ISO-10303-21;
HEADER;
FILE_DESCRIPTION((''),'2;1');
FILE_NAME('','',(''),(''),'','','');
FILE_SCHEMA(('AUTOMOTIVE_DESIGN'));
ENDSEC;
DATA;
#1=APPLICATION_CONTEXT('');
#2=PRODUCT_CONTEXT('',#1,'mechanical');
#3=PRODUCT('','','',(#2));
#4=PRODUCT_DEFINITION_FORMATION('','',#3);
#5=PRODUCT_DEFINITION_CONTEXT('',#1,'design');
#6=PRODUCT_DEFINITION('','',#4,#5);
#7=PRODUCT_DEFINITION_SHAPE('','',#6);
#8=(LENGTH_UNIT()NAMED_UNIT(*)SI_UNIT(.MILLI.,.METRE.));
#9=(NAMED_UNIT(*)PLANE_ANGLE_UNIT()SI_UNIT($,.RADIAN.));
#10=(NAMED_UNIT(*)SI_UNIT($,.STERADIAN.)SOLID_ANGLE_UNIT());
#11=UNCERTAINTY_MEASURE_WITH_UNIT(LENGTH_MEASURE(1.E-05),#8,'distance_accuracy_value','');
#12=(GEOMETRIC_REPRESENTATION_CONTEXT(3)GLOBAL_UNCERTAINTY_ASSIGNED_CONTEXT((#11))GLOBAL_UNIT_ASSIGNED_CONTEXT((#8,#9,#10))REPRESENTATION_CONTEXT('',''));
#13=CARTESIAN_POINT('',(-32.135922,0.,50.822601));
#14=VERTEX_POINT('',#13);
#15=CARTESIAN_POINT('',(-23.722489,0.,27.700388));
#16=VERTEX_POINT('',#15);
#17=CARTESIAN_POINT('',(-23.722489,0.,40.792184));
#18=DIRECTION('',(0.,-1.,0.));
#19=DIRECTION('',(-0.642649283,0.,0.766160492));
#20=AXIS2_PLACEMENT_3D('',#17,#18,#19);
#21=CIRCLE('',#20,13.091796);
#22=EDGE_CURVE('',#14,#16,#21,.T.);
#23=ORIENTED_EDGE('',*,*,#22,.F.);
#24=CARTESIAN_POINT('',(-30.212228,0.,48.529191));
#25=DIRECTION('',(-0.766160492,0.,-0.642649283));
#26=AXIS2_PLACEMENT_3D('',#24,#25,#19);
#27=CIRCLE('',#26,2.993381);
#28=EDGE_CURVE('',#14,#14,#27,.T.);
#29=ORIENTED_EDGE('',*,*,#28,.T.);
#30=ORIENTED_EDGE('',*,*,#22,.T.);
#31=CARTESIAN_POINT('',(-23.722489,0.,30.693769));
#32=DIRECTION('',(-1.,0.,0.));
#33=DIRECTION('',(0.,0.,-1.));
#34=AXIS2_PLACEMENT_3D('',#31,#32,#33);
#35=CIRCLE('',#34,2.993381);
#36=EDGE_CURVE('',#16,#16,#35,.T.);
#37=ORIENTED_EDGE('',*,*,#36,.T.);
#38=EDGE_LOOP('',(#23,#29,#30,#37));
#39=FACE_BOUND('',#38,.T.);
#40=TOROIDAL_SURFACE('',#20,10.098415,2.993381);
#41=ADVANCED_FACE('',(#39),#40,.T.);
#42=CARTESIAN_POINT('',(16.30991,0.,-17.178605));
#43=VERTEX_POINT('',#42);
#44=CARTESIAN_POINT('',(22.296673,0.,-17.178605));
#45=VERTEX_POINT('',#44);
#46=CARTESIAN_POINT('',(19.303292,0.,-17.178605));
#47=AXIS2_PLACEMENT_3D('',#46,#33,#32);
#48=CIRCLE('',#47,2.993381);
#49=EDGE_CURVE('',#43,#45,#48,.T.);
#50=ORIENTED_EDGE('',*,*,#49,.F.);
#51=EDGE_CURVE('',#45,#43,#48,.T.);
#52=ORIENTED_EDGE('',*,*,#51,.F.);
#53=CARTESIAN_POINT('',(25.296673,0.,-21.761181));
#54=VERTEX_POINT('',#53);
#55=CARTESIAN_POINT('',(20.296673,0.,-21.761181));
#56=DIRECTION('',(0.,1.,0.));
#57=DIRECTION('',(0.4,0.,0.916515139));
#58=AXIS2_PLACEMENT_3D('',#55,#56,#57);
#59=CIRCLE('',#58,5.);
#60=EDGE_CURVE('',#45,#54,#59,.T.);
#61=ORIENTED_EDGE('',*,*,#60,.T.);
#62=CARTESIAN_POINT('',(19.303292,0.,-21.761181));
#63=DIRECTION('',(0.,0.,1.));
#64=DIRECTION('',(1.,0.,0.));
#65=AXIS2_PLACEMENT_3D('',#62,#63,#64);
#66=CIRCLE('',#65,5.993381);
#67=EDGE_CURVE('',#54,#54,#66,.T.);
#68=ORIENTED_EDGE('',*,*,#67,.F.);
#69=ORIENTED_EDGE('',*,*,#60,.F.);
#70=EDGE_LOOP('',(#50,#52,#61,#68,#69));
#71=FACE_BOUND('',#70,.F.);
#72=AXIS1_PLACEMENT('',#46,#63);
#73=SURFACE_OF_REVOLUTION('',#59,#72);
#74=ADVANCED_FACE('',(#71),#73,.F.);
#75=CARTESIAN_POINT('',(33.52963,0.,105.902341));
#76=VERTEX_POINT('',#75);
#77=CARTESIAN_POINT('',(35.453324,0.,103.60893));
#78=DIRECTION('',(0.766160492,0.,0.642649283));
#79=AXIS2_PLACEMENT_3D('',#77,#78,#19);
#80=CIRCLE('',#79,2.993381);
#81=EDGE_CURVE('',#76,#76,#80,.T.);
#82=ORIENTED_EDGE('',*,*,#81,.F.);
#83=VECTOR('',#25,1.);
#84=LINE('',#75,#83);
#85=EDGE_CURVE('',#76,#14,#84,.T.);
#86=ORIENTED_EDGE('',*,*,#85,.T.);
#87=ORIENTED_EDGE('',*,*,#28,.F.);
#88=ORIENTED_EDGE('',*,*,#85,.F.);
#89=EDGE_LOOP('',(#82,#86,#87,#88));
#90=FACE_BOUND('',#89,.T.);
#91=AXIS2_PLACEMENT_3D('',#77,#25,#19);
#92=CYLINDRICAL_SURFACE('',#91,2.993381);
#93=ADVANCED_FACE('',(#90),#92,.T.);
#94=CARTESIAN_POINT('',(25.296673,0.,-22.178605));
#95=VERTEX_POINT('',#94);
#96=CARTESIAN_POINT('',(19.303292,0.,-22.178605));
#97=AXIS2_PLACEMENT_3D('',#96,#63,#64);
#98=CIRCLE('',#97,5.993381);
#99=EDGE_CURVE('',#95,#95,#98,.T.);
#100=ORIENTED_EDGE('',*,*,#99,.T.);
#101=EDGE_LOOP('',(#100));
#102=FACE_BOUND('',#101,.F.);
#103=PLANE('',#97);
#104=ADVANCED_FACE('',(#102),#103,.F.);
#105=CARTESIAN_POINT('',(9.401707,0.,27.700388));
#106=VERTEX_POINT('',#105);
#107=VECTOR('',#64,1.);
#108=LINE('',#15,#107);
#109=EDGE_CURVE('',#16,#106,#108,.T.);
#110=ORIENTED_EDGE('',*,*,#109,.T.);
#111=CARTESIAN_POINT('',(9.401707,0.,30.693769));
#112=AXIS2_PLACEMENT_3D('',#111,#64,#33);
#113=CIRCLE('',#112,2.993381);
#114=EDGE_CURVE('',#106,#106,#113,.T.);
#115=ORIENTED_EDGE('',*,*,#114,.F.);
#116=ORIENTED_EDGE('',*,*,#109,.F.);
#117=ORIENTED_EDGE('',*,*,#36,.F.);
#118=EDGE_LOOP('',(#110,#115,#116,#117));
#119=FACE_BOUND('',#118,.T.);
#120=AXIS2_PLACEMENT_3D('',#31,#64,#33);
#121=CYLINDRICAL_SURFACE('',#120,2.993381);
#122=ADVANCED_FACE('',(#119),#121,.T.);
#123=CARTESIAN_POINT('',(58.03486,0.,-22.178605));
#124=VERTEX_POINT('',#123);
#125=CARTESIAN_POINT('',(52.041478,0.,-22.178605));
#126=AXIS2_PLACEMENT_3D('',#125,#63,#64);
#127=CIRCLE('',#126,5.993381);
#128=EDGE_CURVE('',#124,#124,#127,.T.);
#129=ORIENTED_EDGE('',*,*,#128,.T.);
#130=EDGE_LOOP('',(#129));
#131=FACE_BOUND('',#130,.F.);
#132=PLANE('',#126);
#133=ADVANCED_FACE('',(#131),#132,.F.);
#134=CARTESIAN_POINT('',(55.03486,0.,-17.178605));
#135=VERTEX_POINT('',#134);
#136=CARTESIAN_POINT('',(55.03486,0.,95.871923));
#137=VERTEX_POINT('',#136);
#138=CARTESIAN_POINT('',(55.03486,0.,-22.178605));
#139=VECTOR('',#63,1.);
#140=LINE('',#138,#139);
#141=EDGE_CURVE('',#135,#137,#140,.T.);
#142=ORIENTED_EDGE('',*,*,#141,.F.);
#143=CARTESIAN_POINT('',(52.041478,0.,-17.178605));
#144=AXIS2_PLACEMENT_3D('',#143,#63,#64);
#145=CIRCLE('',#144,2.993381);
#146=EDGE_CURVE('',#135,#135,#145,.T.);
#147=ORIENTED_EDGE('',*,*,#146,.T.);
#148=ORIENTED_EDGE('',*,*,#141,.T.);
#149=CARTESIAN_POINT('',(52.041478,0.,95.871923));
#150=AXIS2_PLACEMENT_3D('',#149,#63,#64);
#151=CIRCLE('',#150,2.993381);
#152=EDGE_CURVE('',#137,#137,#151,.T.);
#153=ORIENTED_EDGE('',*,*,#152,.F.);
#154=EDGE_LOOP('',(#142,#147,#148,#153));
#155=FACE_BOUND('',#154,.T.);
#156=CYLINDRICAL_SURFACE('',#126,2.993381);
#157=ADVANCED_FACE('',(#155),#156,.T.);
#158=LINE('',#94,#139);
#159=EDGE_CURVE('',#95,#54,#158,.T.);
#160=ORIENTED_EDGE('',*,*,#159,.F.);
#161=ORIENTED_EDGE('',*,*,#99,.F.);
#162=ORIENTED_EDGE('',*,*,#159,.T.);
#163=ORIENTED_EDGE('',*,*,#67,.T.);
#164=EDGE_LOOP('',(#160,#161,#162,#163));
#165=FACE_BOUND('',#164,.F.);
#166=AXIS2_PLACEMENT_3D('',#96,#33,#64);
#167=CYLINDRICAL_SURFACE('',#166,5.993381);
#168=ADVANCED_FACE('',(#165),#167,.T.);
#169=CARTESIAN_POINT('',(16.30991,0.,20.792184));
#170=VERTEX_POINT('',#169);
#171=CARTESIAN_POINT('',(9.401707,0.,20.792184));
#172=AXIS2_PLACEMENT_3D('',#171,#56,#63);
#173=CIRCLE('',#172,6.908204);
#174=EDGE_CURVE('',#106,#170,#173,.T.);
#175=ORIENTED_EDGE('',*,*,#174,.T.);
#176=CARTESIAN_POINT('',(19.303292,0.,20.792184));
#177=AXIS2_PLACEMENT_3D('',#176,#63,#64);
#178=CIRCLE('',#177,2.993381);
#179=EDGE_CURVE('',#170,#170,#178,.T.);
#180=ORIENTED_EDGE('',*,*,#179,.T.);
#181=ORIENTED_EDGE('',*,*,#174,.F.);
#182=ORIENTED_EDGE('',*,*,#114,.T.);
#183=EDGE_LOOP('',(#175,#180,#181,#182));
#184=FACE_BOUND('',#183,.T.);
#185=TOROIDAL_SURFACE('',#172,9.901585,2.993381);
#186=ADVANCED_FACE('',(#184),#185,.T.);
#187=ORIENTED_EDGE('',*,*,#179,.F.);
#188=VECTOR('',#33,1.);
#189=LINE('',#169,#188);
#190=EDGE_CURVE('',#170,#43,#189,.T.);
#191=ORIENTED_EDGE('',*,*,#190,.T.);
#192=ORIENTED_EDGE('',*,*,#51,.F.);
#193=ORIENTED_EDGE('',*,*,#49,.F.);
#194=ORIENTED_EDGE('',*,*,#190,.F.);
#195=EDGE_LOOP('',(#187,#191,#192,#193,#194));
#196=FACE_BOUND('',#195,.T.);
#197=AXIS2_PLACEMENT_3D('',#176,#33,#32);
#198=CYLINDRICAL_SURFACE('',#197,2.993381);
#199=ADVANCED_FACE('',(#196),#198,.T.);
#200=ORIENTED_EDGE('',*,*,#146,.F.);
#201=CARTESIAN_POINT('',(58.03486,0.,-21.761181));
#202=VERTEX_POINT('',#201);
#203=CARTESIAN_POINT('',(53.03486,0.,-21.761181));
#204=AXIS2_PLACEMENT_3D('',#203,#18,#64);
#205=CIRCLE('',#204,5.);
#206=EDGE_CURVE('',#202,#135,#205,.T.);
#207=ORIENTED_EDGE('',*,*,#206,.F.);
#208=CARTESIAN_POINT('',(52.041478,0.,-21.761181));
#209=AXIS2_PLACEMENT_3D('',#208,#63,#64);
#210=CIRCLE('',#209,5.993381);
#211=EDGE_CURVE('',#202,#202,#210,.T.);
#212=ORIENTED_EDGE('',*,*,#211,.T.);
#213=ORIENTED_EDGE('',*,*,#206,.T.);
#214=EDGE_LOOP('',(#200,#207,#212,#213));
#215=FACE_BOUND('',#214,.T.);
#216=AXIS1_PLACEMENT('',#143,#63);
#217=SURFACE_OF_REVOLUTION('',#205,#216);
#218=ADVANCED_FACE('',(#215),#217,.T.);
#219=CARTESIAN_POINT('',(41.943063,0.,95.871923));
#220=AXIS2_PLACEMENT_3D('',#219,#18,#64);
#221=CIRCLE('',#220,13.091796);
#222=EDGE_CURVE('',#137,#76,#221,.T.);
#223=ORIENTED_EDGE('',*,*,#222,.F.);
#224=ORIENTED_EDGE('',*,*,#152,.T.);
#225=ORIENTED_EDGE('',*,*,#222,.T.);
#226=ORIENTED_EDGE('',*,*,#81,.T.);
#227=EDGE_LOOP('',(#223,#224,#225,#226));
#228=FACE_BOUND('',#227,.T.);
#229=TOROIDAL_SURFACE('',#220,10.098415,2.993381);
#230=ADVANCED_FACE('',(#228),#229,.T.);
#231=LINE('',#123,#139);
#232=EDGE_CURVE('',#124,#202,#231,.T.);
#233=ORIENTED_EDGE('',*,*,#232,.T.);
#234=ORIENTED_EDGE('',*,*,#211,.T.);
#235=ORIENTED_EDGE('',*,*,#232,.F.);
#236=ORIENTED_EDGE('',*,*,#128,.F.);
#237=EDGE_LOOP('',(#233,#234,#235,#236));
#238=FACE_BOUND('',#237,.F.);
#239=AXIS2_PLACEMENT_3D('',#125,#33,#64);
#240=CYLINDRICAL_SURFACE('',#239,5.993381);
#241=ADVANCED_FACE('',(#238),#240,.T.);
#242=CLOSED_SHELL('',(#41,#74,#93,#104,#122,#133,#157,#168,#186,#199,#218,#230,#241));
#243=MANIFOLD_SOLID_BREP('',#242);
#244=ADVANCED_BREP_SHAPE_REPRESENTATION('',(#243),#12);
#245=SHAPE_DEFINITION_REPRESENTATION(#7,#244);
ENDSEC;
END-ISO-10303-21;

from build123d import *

# Parameters (mm, degrees)
F2_R     = 2.9933814251
F4_R     = 5.9933814251
F5_DEPTH = 5


# Not quite as in the source:
# - a fillet or chamfer that OpenCascade refuses, or shapes differently, is made with other operations: its cross-section is extruded or revolved along the edge and cut away or added


with BuildPart() as f3:
    # F3: sweep along a path in F0
    with BuildLine(Plane.XZ) as f3_path:
        Line((51.9430634924, -22.1786051989), (51.9430634924, 95.8719234608))
        ThreePointArc((51.9430634924, 95.8719234608), (46.1700643013, 104.9346197572), (35.5165706601, 103.533528376))
        Line((35.5165706601, 103.533528376), (-30.1489816492, 48.4537890892))
        ThreePointArc((-30.1489816492, 48.4537890892), (-33.11972376, 37.3728311031), (-23.7224888169, 30.7921841741))
        Line((-23.7224888169, 30.7921841741), (9.4017067552, 30.7921841741))
        ThreePointArc((9.4017067552, 30.7921841741), (16.472774567, 27.8632519859), (19.4017067552, 20.7921841741))
        Line((19.4017067552, 20.7921841741), (19.4017067552, -22.1786051989))
    # F2 (on line) → F3 (sweep)
    with BuildSketch(Plane.XY.offset(-22.1786051989)):
        with Locations((52.0414784551, 0)):
            Circle(F2_R)
    sweep(path=f3_path.line)

    # F4 (on line) → F5 (join)
    with BuildSketch(Plane.XY.offset(-22.1786051989)):
        with Locations((52.0414784551, 0)):
            Circle(F4_R)
        with Locations((19.3032917925, 0)):
            Circle(F4_R)
    extrude(amount=F5_DEPTH)

    # F6: fillet of radius 5 on 2 edges, made by hand

    # F6_s1 → F6_t2 (revolve, cut)
    with BuildSketch(Plane.XZ):
        with BuildLine():
            ThreePointArc((58.0348598802, -21.7611808938), (57.2181600129, -19.0225681063), (55.0348598802, -17.1786051989))
            Line((55.0348598802, -17.1786051989), (58.0348598802, -17.1786051989))
            Line((58.0348598802, -17.1786051989), (58.0348598802, -21.7611808938))
        make_face()
    revolve(axis=Axis((52.0414784551, 0, -17.1786051989), (0, 0, 1)), mode=Mode.SUBTRACT)

    # F6_s3 → F6_t4 (revolve, cut)
    with BuildSketch(Plane.XZ):
        with BuildLine():
            ThreePointArc((22.2966732176, -17.1786051989), (24.4799733503, -19.0225681063), (25.2966732176, -21.7611808938))
            Line((25.2966732176, -21.7611808938), (25.2966732176, -17.1786051989))
            Line((25.2966732176, -17.1786051989), (22.2966732176, -17.1786051989))
        make_face()
    revolve(axis=Axis((19.3032917925, 0, -17.1786051989), (0, 0, 1)), mode=Mode.SUBTRACT)


solid = f3.part
